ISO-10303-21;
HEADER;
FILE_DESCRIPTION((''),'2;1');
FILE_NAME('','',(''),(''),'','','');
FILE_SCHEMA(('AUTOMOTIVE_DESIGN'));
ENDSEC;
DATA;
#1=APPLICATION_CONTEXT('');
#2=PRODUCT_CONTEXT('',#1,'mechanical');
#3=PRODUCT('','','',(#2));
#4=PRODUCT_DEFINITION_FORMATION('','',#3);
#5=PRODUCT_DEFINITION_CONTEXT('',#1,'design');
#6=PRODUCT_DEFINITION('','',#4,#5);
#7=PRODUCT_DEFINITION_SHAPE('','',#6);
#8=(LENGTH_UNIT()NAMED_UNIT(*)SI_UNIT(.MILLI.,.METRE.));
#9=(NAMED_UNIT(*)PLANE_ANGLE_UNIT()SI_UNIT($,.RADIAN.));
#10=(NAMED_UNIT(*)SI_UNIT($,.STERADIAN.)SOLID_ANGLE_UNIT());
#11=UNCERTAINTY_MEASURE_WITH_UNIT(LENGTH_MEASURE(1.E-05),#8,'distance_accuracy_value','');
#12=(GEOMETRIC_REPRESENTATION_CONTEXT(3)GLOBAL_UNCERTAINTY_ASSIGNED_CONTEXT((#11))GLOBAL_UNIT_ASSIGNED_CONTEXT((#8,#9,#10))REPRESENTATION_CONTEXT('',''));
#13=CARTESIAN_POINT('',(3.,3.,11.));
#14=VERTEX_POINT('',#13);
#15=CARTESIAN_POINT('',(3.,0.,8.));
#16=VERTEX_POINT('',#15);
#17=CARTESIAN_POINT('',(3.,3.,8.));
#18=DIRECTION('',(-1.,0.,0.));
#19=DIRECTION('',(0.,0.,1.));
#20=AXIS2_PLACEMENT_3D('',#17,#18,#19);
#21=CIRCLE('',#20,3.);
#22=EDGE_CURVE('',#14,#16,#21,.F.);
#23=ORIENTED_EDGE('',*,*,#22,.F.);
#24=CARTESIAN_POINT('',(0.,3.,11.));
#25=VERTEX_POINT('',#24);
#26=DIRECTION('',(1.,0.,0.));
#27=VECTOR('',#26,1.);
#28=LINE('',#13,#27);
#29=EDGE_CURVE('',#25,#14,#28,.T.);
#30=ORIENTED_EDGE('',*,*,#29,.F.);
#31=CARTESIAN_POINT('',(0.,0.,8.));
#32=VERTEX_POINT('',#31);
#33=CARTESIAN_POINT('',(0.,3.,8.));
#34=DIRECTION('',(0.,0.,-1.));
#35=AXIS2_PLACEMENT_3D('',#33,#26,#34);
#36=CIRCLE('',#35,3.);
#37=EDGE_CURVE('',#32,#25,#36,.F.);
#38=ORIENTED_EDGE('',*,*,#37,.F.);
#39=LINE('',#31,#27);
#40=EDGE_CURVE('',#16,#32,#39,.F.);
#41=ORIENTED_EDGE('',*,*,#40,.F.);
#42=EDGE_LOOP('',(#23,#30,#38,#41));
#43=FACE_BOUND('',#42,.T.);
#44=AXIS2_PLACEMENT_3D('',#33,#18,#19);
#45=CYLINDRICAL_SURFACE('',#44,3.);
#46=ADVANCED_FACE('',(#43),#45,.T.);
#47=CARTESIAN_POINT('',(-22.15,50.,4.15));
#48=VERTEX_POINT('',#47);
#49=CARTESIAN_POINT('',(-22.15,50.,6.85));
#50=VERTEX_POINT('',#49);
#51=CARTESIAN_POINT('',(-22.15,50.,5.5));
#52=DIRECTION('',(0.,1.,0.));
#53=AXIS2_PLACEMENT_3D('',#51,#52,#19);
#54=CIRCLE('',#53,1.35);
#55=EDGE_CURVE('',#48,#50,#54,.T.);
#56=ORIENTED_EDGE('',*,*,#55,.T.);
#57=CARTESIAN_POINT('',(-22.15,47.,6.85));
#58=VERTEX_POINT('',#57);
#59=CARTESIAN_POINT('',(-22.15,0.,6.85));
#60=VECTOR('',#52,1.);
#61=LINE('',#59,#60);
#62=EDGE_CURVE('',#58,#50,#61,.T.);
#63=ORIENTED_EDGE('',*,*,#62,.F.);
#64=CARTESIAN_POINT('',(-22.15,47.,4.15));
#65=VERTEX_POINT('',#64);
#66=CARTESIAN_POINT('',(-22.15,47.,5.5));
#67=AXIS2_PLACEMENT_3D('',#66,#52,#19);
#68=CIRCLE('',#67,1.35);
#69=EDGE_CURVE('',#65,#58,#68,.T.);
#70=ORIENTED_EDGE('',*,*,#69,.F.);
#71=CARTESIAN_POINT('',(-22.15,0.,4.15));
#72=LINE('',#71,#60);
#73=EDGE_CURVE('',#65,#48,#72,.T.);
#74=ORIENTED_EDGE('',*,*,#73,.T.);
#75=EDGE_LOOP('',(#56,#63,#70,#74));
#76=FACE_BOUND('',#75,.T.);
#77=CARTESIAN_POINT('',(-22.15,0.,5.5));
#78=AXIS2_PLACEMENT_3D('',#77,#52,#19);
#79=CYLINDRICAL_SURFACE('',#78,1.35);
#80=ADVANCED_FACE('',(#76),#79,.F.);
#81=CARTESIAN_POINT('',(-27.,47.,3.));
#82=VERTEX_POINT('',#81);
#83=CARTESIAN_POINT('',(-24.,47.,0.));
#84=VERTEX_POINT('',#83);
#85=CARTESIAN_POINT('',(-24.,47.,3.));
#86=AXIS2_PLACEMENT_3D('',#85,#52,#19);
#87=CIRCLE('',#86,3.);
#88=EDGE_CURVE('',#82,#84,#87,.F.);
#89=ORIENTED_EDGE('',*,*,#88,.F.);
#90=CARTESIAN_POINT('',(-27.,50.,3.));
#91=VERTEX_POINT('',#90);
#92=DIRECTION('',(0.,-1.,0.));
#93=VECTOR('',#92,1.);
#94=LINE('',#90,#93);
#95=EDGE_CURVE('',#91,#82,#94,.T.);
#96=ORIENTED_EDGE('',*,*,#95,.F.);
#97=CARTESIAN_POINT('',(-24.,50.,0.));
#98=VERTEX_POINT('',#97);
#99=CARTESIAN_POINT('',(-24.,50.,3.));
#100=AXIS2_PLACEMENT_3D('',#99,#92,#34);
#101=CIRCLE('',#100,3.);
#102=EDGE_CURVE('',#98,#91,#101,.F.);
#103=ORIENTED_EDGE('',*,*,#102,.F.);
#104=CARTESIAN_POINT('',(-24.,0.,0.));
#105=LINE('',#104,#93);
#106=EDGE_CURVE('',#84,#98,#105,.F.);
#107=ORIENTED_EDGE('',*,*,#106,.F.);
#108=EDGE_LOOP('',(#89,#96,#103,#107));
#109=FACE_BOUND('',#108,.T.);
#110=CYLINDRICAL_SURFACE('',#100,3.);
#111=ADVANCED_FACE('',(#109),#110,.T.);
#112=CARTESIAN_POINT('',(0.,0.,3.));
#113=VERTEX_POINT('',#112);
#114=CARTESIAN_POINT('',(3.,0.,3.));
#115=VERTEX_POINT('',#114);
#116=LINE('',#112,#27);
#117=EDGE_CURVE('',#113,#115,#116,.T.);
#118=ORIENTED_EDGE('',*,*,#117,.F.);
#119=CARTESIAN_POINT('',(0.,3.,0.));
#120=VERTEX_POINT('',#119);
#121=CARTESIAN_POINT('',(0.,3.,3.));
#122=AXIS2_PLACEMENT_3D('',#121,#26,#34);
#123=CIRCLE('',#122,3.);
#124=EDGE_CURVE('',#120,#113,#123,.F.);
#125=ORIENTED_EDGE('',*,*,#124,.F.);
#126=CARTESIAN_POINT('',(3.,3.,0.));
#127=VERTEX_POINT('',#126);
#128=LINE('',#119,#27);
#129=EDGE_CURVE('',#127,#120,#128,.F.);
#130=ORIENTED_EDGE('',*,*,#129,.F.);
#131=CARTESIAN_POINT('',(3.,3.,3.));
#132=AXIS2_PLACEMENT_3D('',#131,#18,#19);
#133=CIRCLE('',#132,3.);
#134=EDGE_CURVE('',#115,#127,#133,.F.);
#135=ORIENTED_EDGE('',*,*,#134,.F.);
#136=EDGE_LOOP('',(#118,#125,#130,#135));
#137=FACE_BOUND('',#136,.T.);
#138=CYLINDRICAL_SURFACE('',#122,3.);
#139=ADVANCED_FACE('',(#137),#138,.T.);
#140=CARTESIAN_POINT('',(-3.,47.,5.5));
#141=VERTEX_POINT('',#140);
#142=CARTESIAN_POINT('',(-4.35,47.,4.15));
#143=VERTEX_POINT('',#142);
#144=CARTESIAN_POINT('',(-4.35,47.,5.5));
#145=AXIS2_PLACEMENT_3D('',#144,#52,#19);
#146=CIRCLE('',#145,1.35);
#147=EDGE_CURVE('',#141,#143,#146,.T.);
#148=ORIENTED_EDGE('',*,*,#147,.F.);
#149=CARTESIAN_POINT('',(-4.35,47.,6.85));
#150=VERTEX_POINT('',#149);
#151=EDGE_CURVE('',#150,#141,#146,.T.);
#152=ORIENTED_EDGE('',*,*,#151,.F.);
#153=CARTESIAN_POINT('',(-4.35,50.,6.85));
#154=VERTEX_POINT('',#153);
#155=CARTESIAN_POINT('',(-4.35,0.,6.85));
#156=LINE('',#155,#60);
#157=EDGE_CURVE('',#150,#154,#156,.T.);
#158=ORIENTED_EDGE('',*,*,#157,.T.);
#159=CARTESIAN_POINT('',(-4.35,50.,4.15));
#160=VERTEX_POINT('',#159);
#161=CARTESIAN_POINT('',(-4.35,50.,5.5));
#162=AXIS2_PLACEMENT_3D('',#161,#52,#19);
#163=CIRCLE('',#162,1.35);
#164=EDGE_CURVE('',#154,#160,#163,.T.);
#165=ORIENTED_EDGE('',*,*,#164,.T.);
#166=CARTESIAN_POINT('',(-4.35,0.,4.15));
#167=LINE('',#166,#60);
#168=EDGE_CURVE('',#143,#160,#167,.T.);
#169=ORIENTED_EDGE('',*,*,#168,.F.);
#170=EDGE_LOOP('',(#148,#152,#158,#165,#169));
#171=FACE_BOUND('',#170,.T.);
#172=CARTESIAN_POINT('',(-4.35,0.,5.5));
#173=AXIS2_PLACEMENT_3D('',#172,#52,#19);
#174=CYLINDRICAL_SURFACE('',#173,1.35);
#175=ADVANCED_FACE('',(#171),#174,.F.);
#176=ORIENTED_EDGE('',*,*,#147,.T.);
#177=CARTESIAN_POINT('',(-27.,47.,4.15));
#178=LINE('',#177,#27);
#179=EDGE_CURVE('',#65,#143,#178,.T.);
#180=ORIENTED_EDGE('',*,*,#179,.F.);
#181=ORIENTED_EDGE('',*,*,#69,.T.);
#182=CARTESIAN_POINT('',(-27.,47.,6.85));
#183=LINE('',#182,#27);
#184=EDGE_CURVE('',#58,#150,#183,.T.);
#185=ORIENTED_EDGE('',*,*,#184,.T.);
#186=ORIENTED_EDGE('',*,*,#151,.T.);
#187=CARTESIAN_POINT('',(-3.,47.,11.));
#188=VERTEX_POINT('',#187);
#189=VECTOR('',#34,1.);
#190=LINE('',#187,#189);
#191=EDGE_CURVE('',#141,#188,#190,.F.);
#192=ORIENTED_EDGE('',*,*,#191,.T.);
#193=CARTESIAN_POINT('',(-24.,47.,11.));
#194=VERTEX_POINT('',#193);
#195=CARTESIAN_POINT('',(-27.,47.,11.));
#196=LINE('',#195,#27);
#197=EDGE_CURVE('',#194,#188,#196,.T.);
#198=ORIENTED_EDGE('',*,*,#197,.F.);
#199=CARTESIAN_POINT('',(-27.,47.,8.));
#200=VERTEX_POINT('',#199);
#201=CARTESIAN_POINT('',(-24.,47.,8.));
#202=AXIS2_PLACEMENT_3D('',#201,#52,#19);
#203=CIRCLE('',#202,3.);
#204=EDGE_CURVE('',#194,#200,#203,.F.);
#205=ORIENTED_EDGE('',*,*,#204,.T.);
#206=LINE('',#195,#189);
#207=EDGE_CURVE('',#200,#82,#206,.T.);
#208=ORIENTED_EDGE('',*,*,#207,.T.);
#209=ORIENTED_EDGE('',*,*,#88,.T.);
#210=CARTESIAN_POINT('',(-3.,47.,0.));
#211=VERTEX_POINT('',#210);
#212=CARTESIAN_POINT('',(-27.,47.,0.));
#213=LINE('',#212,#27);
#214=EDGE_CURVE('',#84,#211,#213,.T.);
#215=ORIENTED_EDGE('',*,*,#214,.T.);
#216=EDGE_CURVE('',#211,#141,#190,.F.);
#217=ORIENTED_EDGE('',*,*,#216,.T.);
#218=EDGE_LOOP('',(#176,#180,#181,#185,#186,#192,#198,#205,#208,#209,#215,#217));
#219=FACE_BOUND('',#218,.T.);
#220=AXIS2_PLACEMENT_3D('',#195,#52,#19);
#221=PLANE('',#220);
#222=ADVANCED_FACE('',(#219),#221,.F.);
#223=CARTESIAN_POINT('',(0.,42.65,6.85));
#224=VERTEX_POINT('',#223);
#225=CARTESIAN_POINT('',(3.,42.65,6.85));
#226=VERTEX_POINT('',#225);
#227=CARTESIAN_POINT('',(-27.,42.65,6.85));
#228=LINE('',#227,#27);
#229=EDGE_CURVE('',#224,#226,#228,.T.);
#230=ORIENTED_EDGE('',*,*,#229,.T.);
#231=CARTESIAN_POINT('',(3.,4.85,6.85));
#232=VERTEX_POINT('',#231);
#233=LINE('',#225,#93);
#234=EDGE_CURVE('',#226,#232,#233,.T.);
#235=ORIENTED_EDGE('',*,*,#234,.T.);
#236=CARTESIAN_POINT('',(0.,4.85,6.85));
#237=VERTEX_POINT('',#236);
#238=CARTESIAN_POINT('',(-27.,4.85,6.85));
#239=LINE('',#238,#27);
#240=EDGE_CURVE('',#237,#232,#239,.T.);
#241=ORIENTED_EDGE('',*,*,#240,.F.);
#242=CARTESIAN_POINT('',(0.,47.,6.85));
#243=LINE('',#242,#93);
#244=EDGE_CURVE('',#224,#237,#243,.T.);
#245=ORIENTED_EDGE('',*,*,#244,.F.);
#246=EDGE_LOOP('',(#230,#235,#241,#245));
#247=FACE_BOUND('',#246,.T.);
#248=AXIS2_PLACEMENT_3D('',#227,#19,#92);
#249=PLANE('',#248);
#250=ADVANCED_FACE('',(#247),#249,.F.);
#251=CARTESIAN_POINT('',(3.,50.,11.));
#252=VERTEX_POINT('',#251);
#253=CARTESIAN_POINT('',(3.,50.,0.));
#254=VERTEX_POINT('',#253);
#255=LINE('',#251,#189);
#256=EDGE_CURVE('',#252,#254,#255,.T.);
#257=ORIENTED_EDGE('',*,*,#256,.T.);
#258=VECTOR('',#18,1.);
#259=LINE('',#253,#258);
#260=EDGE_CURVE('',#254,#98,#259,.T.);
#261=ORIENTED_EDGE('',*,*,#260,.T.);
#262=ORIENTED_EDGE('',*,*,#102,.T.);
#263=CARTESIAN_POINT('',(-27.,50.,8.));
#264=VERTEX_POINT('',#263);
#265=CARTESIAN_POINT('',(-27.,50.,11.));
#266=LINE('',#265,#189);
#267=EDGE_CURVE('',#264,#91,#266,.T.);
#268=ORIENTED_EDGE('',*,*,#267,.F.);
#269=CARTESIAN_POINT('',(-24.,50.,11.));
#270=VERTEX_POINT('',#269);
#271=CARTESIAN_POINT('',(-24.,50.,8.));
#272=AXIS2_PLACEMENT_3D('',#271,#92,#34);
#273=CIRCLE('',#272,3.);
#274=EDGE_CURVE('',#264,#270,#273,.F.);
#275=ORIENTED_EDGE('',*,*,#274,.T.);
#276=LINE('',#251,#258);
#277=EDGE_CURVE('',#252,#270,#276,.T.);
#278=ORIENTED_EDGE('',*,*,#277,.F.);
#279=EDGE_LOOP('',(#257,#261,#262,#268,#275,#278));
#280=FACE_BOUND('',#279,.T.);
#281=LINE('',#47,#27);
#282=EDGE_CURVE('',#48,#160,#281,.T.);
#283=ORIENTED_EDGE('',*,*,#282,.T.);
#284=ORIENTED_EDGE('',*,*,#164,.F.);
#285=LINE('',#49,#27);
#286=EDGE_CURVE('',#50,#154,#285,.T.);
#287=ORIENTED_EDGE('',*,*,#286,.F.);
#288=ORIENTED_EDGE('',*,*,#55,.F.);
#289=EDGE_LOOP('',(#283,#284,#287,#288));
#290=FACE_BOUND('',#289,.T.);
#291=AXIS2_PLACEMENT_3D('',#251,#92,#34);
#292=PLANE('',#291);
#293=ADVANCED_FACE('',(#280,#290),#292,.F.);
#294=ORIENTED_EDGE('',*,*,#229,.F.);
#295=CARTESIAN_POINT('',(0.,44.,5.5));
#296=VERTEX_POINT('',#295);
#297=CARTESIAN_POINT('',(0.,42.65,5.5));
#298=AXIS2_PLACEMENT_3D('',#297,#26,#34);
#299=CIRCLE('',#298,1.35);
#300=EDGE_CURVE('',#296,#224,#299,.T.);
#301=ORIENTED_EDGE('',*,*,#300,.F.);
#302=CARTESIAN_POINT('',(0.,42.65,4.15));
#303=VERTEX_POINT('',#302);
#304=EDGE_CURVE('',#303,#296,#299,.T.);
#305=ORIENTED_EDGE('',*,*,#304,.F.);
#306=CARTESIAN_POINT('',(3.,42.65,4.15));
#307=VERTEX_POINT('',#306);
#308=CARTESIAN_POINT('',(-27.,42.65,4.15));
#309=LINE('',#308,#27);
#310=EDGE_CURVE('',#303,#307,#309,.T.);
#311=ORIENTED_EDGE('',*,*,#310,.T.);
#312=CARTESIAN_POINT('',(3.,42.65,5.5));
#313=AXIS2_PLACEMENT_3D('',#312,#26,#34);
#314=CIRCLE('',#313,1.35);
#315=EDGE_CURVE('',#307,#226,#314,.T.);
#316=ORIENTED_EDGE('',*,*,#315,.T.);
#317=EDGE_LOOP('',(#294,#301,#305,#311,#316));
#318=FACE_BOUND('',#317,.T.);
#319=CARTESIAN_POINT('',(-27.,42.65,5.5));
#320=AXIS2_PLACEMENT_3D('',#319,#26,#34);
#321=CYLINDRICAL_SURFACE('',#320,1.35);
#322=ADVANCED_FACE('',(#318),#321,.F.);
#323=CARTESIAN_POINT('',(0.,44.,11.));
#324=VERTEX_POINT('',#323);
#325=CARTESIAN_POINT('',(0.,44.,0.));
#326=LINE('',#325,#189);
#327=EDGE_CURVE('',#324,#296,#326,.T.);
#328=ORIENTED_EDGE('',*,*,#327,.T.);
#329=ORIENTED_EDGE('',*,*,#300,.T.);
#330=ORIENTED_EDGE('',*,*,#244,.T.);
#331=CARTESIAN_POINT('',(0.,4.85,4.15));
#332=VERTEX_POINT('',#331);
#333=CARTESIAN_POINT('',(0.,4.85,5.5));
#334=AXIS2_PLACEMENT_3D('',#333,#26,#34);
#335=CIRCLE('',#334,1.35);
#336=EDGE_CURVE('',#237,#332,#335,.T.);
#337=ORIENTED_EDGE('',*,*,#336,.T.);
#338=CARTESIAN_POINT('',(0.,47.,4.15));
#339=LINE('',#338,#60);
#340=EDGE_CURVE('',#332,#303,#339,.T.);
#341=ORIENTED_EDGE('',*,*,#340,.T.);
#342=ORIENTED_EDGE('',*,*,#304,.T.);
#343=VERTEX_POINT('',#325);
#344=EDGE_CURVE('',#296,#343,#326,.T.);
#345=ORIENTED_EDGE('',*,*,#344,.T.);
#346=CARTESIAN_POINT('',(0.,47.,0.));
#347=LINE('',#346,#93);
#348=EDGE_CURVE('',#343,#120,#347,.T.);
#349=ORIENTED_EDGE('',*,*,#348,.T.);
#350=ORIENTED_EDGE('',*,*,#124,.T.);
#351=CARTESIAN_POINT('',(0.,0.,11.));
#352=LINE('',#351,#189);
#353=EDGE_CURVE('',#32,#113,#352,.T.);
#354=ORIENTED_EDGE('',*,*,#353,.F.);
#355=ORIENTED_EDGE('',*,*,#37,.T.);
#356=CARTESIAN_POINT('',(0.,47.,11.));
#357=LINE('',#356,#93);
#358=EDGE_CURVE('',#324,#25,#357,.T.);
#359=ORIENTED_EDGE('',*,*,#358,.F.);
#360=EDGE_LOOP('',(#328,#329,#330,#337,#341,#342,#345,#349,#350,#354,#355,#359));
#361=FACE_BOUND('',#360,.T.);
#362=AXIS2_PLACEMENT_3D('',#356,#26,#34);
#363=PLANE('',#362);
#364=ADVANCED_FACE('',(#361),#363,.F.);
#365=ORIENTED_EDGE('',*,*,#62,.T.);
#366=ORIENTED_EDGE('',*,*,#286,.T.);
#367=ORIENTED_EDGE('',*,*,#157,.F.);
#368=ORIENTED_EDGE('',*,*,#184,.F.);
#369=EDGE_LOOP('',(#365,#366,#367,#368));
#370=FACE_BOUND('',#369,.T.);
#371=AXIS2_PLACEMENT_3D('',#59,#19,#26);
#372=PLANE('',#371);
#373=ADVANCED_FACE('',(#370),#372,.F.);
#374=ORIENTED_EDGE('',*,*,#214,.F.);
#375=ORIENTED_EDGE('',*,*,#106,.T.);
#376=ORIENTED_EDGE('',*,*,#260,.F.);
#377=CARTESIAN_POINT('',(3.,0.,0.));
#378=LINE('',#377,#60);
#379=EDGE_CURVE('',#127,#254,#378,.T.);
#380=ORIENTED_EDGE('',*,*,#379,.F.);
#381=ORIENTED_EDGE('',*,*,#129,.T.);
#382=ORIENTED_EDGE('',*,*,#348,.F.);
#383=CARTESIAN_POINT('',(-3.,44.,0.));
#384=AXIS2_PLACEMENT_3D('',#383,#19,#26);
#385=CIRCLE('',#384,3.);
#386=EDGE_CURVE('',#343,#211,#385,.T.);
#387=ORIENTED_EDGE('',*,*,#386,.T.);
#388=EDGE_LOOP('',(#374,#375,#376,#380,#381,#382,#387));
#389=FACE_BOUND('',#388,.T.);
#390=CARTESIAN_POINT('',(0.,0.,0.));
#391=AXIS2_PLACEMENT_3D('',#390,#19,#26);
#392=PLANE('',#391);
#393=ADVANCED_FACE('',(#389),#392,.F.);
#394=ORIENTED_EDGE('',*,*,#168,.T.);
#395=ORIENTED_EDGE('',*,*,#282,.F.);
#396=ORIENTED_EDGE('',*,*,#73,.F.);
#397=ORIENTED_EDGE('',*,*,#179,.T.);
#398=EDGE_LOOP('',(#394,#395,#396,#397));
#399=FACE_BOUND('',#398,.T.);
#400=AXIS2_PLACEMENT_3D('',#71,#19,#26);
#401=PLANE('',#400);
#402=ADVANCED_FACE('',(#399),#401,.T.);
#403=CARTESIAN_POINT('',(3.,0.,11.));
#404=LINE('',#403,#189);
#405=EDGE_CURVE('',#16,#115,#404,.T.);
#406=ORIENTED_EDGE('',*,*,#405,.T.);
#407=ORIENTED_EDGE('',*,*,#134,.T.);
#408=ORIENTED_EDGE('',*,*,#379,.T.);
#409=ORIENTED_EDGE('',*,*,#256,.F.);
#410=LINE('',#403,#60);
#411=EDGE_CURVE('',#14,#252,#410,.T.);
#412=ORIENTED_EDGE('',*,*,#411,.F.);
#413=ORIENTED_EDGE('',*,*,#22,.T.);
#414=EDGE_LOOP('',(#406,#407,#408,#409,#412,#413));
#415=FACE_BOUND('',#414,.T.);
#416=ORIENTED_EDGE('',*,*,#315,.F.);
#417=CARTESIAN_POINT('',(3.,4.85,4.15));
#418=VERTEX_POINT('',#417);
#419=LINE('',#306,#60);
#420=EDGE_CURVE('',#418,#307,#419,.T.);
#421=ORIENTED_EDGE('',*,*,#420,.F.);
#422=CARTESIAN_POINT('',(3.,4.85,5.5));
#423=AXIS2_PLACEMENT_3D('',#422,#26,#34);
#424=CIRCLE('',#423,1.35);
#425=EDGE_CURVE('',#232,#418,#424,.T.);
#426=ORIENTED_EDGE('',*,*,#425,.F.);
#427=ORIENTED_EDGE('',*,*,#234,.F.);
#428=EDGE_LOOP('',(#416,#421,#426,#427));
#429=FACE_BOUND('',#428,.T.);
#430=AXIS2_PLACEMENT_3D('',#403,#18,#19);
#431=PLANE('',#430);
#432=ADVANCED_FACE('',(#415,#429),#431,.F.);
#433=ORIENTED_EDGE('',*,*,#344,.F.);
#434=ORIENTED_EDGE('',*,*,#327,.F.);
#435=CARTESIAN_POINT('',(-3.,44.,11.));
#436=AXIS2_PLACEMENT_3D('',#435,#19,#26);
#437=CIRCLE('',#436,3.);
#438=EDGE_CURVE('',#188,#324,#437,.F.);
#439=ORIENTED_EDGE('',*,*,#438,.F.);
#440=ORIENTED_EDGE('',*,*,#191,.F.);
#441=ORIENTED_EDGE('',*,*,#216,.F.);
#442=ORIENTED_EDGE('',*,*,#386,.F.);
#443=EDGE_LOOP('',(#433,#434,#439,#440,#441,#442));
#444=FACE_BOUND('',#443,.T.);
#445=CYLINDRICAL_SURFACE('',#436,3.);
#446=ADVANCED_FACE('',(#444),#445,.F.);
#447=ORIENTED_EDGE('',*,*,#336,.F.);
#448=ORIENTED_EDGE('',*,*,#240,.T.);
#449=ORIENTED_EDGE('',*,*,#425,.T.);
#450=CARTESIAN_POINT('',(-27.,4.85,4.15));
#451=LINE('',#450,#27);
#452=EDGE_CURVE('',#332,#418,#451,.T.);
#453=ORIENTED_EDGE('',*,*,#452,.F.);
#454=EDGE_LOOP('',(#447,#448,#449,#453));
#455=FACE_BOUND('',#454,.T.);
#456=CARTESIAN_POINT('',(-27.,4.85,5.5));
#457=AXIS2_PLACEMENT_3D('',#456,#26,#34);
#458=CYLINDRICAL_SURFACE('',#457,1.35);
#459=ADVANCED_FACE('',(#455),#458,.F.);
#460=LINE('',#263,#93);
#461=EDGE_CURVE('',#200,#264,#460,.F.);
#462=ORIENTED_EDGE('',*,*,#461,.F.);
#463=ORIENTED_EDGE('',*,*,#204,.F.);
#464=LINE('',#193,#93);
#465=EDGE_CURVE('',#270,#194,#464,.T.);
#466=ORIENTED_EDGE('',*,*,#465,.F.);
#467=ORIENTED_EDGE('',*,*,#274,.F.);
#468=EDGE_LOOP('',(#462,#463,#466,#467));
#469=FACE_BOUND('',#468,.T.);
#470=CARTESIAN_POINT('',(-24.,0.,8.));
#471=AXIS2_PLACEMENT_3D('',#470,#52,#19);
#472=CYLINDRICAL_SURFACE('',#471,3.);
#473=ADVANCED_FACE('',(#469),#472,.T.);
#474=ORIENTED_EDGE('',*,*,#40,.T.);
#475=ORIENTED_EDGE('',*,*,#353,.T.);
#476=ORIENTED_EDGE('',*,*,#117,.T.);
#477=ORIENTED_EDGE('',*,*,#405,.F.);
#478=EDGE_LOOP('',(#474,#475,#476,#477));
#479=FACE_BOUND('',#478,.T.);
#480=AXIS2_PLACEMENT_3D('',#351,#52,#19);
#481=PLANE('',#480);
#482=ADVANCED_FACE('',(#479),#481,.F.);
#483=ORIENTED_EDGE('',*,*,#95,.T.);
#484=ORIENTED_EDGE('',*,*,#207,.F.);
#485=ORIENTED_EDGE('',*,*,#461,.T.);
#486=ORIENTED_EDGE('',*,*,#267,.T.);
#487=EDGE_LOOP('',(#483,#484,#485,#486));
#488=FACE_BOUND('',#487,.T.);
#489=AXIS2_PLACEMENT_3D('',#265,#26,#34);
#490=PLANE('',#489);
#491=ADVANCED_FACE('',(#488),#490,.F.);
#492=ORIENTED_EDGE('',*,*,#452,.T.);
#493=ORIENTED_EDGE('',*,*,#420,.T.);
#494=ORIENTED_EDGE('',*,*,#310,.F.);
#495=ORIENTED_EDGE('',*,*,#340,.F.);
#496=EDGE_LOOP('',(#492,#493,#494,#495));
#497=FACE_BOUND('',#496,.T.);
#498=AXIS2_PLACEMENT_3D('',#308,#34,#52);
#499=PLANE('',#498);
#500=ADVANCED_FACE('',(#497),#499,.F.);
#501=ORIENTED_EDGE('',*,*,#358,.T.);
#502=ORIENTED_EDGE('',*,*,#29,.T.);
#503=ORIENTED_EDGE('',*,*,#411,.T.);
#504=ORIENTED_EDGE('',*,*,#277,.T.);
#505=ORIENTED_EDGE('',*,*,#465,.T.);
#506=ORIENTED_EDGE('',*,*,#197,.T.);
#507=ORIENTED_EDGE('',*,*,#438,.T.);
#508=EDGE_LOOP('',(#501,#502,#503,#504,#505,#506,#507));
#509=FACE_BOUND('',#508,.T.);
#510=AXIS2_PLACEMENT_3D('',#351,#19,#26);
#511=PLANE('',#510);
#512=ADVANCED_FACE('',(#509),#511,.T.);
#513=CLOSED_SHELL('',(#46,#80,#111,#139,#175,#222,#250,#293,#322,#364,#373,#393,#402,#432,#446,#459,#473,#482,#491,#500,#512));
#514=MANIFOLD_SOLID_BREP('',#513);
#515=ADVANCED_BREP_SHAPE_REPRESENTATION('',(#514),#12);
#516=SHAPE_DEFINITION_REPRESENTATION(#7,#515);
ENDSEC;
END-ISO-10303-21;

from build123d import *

# Parameters (mm, degrees)
BOSS_EXTRUDE1_DEPTH = 11
CUT_EXTRUDE1_DEPTH  = 60.338014797
CUT_EXTRUDE2_DEPTH  = 58.879184514
FILLET1_R           = 3
FILLET2_R           = 3


with BuildPart() as part:
    # Sketch1 → Boss-Extrude1 (new body)
    with BuildSketch(Plane.XY):
        Polygon((0, 0), (3, 0), (3, 50), (-27, 50), (-27, 47), (0, 47), align=None)
    extrude(amount=BOSS_EXTRUDE1_DEPTH)

    # Sketch6 → Cut-Extrude1 (cut, through all)
    with BuildSketch(Plane(origin=(3, 0, 0), x_dir=(0, 0, -1), z_dir=(1, 0, 0))):
        with BuildLine():
            Line((-4.15, 42.65), (-4.15, 4.85))
            ThreePointArc((-4.15, 4.85), (-5.5, 3.5), (-6.85, 4.85))
            Line((-6.85, 4.85), (-6.85, 42.65))
            ThreePointArc((-6.85, 42.65), (-5.5, 44), (-4.15, 42.65))
        make_face()
    extrude(amount=-CUT_EXTRUDE1_DEPTH, mode=Mode.SUBTRACT)

    # Sketch7 → Cut-Extrude2 (cut, through all)
    with BuildSketch(Plane(origin=(0, 50, 0), x_dir=(1, 0, 0), z_dir=(0, 1, 0))):
        with BuildLine():
            Line((-22.15, -4.15), (-4.35, -4.15))
            ThreePointArc((-4.35, -4.15), (-3, -5.5), (-4.35, -6.85))
            Line((-4.35, -6.85), (-22.15, -6.85))
            ThreePointArc((-22.15, -6.85), (-23.5, -5.5), (-22.15, -4.15))
        make_face()
    extrude(amount=-CUT_EXTRUDE2_DEPTH, mode=Mode.SUBTRACT)

    # Fillet1
    fillet1_edges = [part.edges().sort_by_distance(p)[0] for p in [
        (0, 47, 5.5),
    ]]
    fillet(fillet1_edges, radius=FILLET1_R - 0.0001)  # a hair under: the kernel refuses the full size

    # Fillet2
    fillet2_edges = [part.edges().sort_by_distance(p)[0] for p in [
        (-27, 48.5, 11),
        (-27, 48.5, 0),
        (1.5, 0, 0),
        (1.5, 0, 11),
    ]]
    fillet(fillet2_edges, radius=FILLET2_R)


solid = part.part
